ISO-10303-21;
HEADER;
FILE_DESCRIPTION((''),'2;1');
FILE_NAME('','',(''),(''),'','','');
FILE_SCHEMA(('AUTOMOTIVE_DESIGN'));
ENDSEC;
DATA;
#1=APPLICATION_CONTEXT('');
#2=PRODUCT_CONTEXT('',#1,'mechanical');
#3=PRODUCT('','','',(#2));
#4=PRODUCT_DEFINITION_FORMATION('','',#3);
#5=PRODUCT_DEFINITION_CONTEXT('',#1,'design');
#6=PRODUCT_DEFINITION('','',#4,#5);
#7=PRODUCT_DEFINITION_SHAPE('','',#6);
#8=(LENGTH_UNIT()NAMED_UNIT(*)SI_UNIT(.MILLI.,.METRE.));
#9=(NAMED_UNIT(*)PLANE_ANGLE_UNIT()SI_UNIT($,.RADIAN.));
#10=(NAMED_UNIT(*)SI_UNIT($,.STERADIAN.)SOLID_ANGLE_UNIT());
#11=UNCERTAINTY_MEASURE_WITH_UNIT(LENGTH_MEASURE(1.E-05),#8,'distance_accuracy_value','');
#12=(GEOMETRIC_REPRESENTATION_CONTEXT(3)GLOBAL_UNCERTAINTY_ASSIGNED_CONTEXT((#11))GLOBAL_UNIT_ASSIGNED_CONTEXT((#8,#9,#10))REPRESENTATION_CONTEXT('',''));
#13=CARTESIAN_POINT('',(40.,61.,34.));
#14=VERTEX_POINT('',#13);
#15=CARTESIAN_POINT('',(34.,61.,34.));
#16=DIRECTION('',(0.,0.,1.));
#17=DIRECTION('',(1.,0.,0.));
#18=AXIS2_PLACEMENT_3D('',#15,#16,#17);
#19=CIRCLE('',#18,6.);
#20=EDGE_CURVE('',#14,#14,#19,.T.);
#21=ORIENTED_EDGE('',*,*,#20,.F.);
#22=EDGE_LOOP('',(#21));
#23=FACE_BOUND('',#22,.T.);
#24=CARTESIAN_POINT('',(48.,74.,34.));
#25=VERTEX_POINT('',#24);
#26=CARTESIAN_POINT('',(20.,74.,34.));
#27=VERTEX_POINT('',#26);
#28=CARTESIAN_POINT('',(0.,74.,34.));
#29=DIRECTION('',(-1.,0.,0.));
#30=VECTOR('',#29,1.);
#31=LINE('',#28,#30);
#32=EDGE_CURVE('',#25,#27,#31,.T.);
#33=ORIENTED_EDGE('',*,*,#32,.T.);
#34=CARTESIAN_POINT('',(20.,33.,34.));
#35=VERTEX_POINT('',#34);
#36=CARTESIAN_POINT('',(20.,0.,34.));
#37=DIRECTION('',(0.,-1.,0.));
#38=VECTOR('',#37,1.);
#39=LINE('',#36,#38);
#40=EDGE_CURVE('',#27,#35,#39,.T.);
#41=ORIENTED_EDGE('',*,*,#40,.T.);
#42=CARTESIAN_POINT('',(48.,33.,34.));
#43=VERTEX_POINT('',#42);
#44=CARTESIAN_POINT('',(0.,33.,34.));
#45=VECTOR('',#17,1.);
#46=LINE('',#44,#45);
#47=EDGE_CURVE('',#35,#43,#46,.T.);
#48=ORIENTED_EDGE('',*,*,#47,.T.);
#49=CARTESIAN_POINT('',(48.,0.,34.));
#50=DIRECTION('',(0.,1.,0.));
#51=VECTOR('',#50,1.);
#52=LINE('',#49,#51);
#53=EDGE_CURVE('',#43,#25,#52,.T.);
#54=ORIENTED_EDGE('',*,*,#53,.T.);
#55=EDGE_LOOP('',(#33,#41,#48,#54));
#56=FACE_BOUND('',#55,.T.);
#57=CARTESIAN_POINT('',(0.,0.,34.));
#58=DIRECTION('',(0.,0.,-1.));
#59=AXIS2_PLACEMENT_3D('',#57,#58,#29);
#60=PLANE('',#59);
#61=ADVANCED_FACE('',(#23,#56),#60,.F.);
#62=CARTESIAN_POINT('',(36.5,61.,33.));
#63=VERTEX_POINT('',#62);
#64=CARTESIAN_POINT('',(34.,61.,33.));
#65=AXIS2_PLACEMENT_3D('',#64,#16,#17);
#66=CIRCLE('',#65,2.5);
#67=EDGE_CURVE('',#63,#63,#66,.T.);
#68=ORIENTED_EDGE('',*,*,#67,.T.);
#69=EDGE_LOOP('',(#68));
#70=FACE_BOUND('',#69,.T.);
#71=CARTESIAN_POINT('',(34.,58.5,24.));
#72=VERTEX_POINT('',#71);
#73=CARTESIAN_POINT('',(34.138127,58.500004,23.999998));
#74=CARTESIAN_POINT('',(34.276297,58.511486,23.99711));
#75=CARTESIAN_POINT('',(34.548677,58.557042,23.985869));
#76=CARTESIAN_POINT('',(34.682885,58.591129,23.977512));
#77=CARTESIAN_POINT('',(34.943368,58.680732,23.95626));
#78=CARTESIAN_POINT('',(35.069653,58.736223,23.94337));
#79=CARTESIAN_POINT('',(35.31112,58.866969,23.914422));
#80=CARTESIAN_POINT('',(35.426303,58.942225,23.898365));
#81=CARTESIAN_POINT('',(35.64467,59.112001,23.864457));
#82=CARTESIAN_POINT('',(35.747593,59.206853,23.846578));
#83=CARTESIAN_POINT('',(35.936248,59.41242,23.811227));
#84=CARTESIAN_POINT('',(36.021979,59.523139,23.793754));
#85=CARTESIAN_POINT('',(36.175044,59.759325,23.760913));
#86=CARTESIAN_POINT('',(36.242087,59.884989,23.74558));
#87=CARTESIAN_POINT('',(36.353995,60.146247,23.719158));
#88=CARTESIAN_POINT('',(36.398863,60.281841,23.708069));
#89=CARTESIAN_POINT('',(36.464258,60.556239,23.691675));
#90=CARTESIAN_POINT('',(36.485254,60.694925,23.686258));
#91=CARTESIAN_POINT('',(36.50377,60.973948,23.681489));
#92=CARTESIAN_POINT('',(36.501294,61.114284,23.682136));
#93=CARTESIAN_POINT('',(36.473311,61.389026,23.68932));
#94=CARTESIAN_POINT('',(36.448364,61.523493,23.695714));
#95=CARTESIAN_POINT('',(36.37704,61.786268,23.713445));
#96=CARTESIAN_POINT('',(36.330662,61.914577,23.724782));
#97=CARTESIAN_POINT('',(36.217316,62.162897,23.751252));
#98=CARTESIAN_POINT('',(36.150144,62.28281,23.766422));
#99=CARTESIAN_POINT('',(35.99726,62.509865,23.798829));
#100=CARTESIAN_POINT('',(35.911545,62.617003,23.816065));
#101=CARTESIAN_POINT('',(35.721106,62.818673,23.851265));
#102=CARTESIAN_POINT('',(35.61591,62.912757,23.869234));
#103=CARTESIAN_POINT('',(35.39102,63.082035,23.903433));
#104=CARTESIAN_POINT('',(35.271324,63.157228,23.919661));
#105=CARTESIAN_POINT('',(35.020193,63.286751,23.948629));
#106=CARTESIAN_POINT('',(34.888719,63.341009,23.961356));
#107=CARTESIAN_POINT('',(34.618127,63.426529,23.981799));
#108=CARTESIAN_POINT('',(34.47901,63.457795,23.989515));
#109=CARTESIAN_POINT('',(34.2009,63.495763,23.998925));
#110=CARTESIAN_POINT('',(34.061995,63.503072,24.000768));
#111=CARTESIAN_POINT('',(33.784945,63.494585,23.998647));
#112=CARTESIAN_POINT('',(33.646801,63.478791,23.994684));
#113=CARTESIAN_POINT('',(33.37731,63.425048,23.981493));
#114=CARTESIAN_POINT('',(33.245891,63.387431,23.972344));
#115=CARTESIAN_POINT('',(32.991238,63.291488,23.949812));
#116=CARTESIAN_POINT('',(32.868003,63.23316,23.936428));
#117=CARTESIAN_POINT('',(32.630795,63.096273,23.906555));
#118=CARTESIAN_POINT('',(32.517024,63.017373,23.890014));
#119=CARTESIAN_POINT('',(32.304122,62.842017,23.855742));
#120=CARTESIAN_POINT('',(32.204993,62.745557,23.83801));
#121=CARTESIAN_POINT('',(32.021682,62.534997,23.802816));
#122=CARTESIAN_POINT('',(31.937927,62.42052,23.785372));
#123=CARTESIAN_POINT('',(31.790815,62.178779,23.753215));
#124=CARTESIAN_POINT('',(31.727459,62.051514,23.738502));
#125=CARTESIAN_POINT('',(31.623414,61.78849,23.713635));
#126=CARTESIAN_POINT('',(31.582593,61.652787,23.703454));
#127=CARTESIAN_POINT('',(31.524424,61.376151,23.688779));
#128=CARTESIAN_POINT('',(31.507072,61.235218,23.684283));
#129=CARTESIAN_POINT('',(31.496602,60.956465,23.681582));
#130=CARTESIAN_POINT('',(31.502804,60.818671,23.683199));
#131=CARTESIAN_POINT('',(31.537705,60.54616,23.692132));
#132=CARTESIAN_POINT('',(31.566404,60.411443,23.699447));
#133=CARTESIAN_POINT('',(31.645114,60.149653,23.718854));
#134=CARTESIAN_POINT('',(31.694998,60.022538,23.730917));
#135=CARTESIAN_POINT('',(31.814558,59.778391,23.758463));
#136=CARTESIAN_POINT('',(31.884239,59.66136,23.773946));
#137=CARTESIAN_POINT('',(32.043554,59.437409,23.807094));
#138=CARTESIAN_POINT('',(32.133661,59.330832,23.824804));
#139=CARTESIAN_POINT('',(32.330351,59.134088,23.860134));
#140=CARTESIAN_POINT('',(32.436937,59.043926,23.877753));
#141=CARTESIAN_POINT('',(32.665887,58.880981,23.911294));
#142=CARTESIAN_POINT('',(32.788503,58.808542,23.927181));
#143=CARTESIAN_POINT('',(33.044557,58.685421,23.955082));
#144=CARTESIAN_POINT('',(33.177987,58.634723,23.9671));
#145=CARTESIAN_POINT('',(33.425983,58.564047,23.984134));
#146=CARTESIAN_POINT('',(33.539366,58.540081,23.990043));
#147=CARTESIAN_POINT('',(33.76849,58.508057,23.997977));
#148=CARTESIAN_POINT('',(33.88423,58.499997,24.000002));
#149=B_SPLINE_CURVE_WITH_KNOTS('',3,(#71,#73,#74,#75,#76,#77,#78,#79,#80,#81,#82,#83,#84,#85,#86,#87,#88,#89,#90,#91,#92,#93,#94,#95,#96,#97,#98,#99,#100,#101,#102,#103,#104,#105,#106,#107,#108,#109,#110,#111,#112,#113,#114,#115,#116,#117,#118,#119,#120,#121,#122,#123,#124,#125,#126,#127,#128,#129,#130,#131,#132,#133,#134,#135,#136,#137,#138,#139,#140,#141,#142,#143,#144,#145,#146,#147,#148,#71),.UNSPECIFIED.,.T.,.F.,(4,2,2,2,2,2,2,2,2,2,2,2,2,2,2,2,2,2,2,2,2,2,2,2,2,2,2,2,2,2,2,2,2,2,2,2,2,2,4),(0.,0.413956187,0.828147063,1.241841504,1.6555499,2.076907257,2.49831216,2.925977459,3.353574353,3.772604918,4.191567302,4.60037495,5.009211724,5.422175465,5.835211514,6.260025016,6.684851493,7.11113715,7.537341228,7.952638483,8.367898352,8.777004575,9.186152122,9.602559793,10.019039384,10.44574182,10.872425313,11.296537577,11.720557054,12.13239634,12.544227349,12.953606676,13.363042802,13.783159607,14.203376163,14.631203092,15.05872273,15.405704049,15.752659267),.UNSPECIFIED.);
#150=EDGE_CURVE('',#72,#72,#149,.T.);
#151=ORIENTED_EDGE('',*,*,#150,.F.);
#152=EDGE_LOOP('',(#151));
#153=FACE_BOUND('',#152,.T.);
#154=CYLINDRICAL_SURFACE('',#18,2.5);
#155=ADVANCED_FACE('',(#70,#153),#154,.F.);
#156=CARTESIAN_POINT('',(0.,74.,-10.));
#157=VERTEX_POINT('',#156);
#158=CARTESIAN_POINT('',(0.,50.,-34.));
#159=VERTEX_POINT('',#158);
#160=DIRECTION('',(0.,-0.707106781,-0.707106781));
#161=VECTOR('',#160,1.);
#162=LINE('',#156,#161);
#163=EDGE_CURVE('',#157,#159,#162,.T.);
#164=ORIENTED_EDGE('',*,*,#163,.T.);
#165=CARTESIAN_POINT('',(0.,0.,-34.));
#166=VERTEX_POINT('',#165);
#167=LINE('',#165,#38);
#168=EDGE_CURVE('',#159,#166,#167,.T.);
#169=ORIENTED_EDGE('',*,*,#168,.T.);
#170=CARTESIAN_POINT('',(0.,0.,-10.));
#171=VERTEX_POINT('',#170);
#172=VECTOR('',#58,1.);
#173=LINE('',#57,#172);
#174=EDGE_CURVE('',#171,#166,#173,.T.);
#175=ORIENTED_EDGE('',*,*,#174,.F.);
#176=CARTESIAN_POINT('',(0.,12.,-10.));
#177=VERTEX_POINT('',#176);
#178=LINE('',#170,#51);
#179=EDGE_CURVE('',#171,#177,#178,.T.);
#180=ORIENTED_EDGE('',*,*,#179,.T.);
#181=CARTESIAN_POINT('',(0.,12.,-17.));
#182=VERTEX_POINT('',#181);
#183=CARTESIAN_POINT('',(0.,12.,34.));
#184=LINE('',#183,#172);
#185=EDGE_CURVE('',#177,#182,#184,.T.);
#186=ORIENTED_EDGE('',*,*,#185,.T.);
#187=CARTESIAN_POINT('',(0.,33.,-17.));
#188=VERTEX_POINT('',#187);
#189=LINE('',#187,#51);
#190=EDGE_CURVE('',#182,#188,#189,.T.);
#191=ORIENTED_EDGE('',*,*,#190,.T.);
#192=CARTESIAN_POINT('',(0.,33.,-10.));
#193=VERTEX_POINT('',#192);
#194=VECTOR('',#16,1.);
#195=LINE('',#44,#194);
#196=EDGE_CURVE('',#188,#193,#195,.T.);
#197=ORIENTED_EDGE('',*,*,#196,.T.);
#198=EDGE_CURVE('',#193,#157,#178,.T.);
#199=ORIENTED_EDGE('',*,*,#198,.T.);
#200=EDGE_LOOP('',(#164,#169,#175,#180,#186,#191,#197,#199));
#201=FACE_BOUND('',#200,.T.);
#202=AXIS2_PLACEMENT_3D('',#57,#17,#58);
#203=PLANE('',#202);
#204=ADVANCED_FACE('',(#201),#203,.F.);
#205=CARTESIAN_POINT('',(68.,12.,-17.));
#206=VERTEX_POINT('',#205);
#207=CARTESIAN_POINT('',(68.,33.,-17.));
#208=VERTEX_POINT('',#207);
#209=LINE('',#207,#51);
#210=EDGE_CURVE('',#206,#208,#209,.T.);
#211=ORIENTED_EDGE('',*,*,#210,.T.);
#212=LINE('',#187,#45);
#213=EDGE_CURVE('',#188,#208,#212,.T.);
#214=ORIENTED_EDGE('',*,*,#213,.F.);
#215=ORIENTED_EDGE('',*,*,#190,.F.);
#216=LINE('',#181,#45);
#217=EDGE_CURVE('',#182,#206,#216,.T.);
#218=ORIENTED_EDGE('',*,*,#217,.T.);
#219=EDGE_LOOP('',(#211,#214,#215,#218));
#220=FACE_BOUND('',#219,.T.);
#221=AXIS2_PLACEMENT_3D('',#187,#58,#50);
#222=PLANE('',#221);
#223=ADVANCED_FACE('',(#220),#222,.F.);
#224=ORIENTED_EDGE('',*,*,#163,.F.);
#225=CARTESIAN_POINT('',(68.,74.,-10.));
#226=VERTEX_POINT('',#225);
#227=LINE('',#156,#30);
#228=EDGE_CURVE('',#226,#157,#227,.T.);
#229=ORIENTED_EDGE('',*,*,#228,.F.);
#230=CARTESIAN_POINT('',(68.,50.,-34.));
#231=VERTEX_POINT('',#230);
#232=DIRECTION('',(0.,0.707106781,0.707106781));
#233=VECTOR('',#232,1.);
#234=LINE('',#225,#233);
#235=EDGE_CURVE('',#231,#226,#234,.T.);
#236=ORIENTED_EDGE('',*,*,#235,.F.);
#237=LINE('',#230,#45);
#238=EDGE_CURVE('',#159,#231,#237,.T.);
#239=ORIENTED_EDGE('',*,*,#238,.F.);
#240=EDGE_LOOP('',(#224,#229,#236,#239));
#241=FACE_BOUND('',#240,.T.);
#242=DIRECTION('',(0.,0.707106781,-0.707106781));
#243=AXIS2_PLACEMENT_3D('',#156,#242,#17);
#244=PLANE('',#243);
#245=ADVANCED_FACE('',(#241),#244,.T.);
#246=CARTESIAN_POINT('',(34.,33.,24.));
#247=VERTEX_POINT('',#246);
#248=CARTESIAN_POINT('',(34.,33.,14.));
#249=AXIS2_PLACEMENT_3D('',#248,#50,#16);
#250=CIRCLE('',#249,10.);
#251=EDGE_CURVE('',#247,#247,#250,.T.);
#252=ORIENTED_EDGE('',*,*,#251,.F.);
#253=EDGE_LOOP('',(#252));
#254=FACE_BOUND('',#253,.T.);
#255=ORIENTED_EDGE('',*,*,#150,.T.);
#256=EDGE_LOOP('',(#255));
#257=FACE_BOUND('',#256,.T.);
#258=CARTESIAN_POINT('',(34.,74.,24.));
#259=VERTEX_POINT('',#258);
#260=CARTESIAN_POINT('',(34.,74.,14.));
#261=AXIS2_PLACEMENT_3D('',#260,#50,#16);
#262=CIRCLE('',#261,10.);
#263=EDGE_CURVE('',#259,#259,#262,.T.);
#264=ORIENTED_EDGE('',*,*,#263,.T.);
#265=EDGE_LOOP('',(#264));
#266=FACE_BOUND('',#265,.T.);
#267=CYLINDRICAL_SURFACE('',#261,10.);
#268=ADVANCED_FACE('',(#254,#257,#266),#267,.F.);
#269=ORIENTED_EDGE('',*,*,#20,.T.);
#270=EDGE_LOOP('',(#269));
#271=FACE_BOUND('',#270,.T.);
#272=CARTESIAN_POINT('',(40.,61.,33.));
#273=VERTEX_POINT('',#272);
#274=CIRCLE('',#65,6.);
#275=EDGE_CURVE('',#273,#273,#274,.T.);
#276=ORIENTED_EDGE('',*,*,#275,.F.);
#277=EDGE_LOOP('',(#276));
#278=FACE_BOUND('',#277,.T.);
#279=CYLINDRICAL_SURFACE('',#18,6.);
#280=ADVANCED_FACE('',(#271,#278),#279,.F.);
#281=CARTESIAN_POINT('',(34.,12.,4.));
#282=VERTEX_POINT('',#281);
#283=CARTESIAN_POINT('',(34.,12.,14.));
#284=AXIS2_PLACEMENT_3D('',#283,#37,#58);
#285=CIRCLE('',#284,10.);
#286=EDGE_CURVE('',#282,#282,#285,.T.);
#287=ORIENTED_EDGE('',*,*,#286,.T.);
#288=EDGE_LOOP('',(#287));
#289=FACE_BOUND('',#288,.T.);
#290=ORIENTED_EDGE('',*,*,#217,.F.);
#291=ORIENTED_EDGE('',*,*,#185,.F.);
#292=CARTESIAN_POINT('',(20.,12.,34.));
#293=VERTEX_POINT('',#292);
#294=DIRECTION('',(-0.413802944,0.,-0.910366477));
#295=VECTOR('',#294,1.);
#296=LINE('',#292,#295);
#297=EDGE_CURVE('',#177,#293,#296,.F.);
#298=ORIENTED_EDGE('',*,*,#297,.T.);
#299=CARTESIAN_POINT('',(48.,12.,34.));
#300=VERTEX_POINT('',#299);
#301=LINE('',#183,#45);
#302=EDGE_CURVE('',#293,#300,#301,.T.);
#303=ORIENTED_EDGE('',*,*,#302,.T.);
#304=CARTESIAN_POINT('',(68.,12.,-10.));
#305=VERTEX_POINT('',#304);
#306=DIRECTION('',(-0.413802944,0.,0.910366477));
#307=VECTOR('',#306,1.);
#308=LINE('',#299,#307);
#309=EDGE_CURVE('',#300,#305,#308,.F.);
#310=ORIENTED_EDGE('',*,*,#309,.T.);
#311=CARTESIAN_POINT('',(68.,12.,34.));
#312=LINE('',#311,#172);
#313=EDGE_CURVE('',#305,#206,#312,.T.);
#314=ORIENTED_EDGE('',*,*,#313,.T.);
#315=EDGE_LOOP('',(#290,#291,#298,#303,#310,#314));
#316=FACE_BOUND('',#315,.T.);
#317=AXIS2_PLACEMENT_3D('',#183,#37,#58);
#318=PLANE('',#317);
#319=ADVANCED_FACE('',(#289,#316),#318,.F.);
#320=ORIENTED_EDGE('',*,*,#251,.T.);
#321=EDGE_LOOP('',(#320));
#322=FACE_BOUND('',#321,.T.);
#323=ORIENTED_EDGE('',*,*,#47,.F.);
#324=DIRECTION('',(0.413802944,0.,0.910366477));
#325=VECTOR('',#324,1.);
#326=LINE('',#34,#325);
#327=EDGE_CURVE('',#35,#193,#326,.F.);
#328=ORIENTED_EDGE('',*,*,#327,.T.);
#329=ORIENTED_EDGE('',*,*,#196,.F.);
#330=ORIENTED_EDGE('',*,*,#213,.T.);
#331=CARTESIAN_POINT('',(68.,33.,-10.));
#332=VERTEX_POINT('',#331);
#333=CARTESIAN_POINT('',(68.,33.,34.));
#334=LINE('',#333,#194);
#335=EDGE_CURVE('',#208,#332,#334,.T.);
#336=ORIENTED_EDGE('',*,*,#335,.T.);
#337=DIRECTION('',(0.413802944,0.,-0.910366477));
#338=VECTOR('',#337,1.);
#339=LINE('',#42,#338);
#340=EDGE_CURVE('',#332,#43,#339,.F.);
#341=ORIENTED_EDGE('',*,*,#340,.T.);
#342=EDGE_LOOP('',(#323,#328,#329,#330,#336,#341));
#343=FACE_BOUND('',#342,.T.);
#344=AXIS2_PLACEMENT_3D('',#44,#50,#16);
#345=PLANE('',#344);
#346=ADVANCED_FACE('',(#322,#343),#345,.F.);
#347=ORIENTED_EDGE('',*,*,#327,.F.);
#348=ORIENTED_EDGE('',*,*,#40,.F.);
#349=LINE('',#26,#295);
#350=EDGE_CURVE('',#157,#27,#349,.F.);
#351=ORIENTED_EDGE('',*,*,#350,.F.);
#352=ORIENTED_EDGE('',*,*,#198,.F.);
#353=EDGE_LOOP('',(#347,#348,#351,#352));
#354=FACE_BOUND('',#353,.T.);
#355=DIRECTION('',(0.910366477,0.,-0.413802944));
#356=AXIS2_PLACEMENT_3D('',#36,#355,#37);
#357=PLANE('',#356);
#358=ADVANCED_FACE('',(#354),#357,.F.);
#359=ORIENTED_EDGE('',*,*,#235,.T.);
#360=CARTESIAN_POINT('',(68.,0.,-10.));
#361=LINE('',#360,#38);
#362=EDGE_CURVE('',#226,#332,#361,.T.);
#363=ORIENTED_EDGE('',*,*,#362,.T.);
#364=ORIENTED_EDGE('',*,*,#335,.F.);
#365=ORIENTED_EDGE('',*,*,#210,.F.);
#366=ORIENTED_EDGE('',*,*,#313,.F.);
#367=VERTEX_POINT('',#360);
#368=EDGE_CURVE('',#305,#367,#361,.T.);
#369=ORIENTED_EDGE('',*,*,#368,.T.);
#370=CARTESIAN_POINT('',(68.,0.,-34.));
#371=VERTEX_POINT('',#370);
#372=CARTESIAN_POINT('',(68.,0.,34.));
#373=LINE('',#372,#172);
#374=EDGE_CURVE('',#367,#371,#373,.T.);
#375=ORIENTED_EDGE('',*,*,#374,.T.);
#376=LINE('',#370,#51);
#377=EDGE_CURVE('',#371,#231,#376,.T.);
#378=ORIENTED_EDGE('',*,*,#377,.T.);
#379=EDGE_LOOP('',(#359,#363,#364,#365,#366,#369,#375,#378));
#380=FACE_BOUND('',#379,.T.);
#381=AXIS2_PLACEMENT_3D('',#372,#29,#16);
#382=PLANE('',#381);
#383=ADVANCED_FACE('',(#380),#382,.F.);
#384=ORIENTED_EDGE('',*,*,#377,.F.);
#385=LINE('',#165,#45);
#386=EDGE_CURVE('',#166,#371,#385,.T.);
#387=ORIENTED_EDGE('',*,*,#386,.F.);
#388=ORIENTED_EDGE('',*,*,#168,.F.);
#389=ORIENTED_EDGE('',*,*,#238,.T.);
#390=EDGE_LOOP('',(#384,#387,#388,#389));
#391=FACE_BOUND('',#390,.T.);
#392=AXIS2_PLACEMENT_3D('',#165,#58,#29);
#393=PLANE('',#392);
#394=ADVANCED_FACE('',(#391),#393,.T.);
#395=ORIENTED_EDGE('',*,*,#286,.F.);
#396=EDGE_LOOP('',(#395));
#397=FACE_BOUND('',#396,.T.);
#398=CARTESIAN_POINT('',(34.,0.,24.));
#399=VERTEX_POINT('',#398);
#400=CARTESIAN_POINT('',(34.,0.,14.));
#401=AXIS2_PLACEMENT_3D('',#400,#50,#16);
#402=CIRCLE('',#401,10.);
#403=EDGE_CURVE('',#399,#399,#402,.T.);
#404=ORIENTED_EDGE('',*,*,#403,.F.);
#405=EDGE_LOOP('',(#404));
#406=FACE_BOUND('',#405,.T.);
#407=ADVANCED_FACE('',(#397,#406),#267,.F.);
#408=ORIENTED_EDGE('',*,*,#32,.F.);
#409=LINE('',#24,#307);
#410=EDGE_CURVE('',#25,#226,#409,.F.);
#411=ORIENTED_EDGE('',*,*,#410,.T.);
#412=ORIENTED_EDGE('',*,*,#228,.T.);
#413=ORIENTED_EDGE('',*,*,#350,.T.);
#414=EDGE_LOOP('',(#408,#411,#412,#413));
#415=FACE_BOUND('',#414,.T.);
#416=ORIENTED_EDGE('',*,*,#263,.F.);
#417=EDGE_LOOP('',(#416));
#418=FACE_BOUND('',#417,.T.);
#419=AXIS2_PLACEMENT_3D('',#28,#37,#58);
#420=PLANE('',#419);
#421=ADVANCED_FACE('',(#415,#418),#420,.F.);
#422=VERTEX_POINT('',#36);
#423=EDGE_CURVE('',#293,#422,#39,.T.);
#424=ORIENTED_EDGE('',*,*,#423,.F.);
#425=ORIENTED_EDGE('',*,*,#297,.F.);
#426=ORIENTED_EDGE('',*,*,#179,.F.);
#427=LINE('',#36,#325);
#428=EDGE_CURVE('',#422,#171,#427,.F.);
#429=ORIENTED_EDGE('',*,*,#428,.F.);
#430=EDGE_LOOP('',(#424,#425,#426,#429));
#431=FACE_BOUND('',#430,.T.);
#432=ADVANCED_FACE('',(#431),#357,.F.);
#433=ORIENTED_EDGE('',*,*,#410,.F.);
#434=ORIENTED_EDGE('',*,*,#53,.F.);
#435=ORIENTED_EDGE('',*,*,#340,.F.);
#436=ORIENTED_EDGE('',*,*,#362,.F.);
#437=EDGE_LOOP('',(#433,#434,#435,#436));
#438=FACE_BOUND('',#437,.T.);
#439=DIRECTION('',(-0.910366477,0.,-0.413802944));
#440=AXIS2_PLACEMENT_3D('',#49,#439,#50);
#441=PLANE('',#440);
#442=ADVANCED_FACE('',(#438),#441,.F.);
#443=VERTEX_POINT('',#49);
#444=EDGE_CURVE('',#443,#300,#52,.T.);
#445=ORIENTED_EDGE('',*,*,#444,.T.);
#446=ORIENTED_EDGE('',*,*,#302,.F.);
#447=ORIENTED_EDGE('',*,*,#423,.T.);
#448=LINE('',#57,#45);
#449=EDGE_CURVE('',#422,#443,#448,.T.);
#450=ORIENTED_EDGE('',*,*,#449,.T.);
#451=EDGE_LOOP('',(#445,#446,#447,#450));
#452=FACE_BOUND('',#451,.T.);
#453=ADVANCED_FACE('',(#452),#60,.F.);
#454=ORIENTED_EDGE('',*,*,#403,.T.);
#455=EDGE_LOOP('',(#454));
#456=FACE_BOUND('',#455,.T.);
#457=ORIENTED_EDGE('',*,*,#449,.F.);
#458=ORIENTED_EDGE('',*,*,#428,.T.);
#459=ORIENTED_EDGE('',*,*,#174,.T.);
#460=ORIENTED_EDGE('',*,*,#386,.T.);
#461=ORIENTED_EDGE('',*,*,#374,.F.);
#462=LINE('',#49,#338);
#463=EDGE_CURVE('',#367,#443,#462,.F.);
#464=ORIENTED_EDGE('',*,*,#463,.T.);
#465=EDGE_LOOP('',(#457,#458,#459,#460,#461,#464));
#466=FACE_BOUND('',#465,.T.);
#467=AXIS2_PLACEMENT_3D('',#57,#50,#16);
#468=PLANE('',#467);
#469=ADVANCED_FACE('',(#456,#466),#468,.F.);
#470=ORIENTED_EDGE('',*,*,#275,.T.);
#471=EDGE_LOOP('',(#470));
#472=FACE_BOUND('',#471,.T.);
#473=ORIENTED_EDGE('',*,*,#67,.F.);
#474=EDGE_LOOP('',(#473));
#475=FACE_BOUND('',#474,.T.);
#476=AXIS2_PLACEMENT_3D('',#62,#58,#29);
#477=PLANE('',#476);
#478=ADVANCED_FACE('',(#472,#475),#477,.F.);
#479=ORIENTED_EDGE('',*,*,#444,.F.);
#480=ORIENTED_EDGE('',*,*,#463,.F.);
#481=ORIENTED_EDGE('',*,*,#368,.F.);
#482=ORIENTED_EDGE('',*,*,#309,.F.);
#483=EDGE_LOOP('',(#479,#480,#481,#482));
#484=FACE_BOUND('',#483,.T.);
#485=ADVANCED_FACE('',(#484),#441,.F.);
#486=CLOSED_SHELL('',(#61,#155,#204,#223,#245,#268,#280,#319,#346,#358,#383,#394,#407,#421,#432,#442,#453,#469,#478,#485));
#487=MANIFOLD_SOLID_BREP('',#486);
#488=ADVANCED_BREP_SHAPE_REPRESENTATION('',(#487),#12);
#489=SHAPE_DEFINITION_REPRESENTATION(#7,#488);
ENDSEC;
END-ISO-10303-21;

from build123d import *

# Parameters (mm, degrees)
ESQUISSE1_W             = 68
ESQUISSE1_H             = 74
BOSS_EXTRU_1_DEPTH      = 34
ESQUISSE2_W             = 51
ESQUISSE2_H             = 21
ENL_V_MAT_EXTRU_1_DEPTH = 107.094297679
CHANFREIN1_SIZE         = 44
CHANFREIN1_SIZE2        = 20
CHANFREIN2_SIZE         = 44
CHANFREIN2_SIZE2        = 20
CHANFREIN3_SIZE         = 24
PER_AGE1_D              = 20
PER_AGE1_DEPTH          = 74
PER_AGE1_TIP            = 6.00860619


# Read off the part's stored shape, not the designer's step: Perçage2
with BuildPart() as part:
    # Esquisse1 → Boss.-Extru.1 (new, symmetric)
    with BuildSketch(Plane.XY):
        with Locations((34, 37)):
            Rectangle(ESQUISSE1_W, ESQUISSE1_H)
    extrude(amount=BOSS_EXTRU_1_DEPTH, both=True)

    # Esquisse2 → Enlèv. mat.-Extru.1 (cut, through all)
    with BuildSketch(Plane(origin=(68, 0, 0), x_dir=(0, 0, -1), z_dir=(1, 0, 0))):
        with Locations((-8.5, 22.5)):
            Rectangle(ESQUISSE2_W, ESQUISSE2_H)
    extrude(amount=-ENL_V_MAT_EXTRU_1_DEPTH, mode=Mode.SUBTRACT)

    # Chanfrein1
    chanfrein1_edges = [part.edges().sort_by_distance(p)[0] for p in [
        (68, 6, 34),
        (68, 53.5, 34),
    ]]
    chanfrein1_side = [part.faces().sort_by_distance(p)[0] for p in [
        (68, 40.920600858, -2.298283262),
    ]]
    chamfer(chanfrein1_edges, length=CHANFREIN1_SIZE, length2=CHANFREIN1_SIZE2, reference=chanfrein1_side[0])

    # Chanfrein2
    chanfrein2_edges = [part.edges().sort_by_distance(p)[0] for p in [
        (0, 6, 34),
        (0, 53.5, 34),
    ]]
    chanfrein2_side = [part.faces().sort_by_distance(p)[0] for p in [
        (0, 40.920600858, -2.298283262),
    ]]
    chamfer(chanfrein2_edges, length=CHANFREIN2_SIZE, length2=CHANFREIN2_SIZE2, reference=chanfrein2_side[0])

    # Chanfrein3
    chanfrein3_edges = [part.edges().sort_by_distance(p)[0] for p in [
        (34, 74, -34),
    ]]
    chamfer(chanfrein3_edges, length=CHANFREIN3_SIZE)

    # Perçage1
    with Locations(Plane(origin=(0, 74, 0), x_dir=(1, 0, 0), z_dir=(0, 1, 0))):
        with Locations((34, -14)):
            Hole(PER_AGE1_D / 2, depth=PER_AGE1_DEPTH)
            with Locations((0, 0, -(PER_AGE1_DEPTH + PER_AGE1_TIP / 2))):  # 118° drill point
                Cone(0, PER_AGE1_D / 2, PER_AGE1_TIP, mode=Mode.SUBTRACT)

    # Perçage2 outline → Perçage2 (revolve, cut)
    with BuildSketch(Plane(origin=(34, 61, 0), x_dir=(1, 0, 0), z_dir=(0, -1, 0))):
        Polygon((0, 23.682322777), (2.5, 23.682322777), (2.5, 33), (6, 33), (6, 34), (0, 34), align=None)
    revolve(axis=Axis((34, 61, 0), (0, 0, 1)), mode=Mode.SUBTRACT)


solid = part.part
